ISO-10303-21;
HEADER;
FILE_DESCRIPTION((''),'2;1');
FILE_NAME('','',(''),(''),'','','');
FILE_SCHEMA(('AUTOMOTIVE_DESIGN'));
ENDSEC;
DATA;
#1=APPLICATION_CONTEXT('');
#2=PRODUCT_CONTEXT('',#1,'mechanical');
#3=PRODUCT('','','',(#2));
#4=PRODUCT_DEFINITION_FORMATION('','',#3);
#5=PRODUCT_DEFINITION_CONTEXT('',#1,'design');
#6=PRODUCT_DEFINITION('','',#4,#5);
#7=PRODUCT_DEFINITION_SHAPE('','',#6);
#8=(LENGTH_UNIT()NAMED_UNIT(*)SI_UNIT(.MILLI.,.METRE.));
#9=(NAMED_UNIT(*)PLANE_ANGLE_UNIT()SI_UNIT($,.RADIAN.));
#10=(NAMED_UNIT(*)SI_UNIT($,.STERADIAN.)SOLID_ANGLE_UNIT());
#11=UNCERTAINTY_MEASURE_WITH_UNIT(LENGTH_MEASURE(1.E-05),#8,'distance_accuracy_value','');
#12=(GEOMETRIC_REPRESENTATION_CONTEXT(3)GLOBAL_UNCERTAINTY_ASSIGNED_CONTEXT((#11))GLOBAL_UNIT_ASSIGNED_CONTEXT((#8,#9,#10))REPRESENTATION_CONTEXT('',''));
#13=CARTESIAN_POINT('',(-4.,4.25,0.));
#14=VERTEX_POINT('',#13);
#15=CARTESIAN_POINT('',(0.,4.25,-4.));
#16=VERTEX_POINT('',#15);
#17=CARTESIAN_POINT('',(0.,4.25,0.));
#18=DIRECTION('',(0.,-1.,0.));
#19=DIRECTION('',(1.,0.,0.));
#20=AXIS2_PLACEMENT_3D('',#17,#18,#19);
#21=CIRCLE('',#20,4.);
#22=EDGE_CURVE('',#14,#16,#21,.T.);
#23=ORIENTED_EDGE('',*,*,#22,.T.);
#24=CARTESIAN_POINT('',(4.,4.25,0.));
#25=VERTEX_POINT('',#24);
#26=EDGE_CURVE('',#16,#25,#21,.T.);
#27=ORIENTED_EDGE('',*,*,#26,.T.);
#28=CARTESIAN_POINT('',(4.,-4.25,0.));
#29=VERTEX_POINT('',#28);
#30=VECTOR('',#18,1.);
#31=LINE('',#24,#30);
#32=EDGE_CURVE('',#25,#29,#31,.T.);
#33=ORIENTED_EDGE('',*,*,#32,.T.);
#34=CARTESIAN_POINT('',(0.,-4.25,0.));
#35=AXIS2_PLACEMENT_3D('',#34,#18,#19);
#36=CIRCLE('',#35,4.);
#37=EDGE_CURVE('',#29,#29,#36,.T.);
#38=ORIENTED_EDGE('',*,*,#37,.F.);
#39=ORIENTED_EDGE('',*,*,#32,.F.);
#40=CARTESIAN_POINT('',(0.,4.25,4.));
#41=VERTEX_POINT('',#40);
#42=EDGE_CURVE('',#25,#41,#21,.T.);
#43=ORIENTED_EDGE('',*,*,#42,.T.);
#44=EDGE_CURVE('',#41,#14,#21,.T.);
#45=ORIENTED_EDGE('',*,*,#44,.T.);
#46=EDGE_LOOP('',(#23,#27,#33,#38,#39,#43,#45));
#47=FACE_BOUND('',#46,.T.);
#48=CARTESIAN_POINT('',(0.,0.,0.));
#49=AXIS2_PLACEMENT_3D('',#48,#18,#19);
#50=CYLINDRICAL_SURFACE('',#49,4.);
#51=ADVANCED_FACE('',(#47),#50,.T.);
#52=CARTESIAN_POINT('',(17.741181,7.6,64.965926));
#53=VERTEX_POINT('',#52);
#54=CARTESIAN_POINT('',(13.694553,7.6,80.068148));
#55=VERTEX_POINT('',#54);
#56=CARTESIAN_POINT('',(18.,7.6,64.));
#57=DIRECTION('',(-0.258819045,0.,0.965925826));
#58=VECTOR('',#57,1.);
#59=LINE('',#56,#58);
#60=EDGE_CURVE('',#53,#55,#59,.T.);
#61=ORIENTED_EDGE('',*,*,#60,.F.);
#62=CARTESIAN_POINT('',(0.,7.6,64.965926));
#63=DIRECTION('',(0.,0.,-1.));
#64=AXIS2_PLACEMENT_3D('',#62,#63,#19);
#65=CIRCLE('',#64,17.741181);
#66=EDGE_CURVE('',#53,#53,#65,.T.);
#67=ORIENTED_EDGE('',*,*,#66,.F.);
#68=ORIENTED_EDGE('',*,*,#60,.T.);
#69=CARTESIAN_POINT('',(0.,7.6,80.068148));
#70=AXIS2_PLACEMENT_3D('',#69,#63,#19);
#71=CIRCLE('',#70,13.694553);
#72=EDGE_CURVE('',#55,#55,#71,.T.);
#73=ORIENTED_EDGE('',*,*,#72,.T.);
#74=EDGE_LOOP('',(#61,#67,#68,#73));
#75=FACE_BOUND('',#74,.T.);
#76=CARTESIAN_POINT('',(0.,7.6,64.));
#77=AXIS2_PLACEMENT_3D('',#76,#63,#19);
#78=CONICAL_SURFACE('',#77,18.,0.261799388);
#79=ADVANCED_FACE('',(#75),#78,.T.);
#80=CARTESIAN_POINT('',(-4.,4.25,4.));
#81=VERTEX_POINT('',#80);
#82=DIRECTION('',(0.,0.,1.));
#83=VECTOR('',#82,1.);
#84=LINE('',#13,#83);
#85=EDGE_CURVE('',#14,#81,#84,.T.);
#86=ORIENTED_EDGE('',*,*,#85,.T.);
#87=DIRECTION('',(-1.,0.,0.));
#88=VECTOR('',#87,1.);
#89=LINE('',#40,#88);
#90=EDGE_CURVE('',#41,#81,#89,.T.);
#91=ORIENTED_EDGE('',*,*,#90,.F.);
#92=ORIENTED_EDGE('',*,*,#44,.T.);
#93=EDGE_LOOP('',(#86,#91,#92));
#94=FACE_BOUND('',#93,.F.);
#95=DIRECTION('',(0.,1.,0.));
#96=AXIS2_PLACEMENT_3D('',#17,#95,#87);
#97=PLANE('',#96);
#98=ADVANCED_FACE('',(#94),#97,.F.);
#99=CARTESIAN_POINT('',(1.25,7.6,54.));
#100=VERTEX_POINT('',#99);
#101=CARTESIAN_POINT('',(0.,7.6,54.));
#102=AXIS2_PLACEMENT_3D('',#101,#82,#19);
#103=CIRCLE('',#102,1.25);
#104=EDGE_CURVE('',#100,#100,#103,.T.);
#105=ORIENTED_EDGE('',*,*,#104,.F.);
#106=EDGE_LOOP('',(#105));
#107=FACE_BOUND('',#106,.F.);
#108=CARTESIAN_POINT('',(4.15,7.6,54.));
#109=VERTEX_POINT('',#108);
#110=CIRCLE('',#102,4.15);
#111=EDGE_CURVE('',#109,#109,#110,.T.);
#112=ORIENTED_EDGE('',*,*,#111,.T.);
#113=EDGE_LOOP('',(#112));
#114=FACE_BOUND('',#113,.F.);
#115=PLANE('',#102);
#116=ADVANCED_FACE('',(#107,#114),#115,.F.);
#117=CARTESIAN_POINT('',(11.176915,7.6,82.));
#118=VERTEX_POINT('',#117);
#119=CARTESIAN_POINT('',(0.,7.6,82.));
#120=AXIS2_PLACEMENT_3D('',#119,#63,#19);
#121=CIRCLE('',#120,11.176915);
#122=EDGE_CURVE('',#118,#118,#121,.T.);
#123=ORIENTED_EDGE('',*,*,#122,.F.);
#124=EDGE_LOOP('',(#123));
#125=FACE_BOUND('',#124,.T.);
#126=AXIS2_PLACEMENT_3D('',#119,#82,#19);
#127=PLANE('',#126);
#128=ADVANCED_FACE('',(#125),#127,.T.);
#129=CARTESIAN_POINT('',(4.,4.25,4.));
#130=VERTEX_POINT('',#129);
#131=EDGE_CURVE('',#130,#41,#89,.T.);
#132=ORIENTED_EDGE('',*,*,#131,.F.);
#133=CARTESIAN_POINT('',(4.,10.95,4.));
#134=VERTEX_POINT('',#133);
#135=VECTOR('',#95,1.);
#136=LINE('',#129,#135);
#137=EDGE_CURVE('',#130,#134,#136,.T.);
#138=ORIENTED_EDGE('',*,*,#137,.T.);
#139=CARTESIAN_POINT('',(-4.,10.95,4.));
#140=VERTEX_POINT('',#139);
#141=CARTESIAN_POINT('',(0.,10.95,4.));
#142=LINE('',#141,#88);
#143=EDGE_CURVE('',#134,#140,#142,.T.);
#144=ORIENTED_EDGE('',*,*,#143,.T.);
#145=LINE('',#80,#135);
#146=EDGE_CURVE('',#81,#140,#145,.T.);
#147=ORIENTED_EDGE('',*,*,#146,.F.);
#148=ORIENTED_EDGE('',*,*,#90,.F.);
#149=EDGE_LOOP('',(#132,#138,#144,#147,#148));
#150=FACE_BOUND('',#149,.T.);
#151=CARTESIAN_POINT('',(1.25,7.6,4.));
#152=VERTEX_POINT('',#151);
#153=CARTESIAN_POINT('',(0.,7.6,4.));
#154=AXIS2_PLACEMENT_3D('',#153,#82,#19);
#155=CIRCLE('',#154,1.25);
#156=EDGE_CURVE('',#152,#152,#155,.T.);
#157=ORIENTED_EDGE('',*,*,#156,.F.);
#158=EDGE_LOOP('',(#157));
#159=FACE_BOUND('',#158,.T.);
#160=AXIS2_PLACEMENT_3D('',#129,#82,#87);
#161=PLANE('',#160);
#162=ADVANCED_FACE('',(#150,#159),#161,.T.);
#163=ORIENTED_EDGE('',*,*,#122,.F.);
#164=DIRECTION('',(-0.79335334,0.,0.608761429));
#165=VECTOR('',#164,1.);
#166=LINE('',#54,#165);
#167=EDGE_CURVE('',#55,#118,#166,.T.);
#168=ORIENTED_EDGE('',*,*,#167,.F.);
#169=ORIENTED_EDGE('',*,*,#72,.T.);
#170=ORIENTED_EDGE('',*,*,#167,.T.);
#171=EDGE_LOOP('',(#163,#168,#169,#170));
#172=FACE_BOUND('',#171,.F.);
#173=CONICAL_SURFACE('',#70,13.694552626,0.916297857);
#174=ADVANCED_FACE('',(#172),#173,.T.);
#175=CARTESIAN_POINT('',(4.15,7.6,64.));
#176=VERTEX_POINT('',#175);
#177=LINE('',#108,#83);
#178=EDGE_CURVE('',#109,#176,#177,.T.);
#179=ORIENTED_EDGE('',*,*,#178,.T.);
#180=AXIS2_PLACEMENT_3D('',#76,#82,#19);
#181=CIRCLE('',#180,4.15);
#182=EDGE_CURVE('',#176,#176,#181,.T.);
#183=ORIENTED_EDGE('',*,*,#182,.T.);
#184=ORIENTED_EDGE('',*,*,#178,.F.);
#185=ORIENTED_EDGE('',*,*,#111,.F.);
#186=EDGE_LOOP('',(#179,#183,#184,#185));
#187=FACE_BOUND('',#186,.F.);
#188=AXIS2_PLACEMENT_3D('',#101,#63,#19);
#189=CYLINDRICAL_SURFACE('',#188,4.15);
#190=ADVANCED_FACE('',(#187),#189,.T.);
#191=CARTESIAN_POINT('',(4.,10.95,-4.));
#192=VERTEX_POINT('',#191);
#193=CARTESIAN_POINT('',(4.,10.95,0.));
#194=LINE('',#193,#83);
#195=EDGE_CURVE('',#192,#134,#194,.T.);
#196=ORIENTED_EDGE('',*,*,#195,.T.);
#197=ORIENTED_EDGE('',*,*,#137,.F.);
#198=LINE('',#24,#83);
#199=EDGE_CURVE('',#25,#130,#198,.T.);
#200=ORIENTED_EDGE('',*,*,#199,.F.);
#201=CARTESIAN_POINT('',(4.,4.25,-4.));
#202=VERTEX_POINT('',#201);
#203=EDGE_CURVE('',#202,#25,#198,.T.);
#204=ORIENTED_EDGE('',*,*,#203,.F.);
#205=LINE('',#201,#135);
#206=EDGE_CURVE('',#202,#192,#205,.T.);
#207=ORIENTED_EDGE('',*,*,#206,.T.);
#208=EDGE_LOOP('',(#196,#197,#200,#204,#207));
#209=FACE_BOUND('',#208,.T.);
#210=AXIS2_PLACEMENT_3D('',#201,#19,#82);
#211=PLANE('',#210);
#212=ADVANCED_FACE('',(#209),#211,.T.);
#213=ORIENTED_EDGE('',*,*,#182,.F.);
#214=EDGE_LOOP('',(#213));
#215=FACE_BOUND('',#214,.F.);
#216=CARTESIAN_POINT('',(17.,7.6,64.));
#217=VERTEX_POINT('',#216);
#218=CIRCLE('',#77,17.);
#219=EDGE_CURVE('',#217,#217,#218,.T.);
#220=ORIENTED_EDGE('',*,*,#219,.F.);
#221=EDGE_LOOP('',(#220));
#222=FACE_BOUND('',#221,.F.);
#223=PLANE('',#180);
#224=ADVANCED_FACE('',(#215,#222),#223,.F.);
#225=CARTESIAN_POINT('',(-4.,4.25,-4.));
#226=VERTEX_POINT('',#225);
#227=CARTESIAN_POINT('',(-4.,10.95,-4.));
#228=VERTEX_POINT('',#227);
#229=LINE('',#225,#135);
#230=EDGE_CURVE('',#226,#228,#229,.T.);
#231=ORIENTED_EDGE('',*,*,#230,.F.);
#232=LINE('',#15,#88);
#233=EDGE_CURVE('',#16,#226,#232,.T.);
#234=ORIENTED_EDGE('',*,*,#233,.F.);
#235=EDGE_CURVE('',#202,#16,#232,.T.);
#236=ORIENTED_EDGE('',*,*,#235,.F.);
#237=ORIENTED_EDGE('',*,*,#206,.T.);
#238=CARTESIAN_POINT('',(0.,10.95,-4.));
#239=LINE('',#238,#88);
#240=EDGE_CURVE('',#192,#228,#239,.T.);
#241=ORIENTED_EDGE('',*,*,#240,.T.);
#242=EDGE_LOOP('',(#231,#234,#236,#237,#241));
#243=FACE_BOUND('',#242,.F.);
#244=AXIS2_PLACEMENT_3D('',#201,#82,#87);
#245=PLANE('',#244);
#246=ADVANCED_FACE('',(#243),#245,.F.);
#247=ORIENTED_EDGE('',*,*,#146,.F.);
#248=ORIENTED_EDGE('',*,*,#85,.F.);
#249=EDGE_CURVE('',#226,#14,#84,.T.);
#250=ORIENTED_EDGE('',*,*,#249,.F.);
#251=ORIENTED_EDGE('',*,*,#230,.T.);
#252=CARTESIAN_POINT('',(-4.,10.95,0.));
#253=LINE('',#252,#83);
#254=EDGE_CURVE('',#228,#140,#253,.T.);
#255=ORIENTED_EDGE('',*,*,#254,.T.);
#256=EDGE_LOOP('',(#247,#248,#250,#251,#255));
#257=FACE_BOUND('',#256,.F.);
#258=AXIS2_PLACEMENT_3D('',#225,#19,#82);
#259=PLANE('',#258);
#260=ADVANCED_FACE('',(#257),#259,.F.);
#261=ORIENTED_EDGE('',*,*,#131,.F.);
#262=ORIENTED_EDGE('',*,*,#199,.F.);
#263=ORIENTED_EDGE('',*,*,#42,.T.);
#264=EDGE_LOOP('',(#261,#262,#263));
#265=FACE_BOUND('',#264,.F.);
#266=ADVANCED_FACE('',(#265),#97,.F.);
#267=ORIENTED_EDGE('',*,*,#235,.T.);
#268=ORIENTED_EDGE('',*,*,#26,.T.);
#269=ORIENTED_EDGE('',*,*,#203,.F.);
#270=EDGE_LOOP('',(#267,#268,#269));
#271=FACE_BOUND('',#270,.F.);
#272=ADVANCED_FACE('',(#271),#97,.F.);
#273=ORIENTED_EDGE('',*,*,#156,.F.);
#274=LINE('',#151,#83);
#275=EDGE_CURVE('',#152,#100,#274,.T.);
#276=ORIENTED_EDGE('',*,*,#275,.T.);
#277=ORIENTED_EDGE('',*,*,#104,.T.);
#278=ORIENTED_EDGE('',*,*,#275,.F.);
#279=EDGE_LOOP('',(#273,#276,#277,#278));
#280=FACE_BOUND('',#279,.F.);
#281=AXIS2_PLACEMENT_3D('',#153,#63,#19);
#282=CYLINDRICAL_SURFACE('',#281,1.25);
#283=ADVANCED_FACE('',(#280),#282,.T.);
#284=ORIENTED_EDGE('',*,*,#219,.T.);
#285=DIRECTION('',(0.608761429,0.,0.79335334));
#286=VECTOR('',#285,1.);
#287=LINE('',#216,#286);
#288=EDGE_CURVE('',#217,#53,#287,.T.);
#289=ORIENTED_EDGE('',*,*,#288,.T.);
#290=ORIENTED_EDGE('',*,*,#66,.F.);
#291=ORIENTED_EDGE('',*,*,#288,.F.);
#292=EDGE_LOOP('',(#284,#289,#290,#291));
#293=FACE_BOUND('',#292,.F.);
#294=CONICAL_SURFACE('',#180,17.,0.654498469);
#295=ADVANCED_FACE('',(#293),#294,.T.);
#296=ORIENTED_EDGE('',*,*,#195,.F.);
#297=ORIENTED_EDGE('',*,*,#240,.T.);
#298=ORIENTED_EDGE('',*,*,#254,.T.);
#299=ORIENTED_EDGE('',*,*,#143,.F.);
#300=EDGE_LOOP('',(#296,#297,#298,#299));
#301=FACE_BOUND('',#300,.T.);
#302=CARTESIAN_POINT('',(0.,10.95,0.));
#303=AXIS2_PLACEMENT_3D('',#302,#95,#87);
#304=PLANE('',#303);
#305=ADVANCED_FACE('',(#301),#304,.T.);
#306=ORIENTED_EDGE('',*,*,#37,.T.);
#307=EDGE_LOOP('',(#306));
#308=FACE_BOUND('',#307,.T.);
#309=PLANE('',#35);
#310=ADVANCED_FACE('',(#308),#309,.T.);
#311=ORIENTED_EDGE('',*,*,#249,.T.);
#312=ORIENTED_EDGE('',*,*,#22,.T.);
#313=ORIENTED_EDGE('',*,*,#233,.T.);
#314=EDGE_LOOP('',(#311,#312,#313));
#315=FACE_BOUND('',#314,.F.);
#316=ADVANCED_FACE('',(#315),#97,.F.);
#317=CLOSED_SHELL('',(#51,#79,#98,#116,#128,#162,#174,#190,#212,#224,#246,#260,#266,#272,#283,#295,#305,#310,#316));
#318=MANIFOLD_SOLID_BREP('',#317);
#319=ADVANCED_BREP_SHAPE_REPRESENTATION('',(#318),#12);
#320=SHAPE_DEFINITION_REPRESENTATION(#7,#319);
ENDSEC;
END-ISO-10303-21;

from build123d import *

# Parameters (mm, degrees)
F0_R     = 4
F1_DEPTH = 4.25
F2_W     = 8
F2_H     = 8
F3_DEPTH = 6.7
F4_R     = 1.25
F5_DEPTH = 50
F6_R     = 4.15
F7_DEPTH = 10
F8_R     = 18
F8_R_2   = 4.15
F9_DEPTH = 18
F9_TAPER = 15


# Not quite as in the source:
# - a fillet or chamfer that OpenCascade refuses, or shapes differently, is made with other operations: its cross-section is extruded or revolved along the edge and cut away or added


with BuildPart() as f1:
    # F0 (on Front) → F1 (new body, symmetric)
    with BuildSketch(Plane.XZ):
        Circle(F0_R)
    extrude(amount=F1_DEPTH, both=True)

    # F2 (on face) → F3 (join)
    with BuildSketch(Plane(origin=(0, 4.25, 0), x_dir=(-1, 0, 0), z_dir=(0, 1, 0))):
        Rectangle(F2_W, F2_H)
    extrude(amount=F3_DEPTH)

    # F4 (on face) → F5 (join)
    with BuildSketch(Plane.XY.offset(4)):
        with Locations((0, 7.6)):
            Circle(F4_R)
    extrude(amount=F5_DEPTH)

    # F6 (on face) → F7 (join)
    with BuildSketch(Plane.XY.offset(54)):
        with Locations((0, 7.6)):
            Circle(F6_R)
    extrude(amount=F7_DEPTH)

    # F8 (on face) → F9 (join)
    with BuildSketch(Plane.XY.offset(64)):
        with Locations((0, 7.6)):
            Circle(F8_R)
        with Locations((0, 7.6)):
            Circle(F8_R_2, mode=Mode.SUBTRACT)
        with Locations((0, 7.6)):
            Circle(F8_R_2)
    extrude(amount=F9_DEPTH, taper=F9_TAPER)

    # F10: chamfer of 1 on 1 edges, made by hand

    # F10_s1 → F10_t2 (revolve, cut)
    with BuildSketch(Plane.XZ.offset(-7.6)):
        Polygon((17, 64), (17.7411809549, 64.9659258263), (18, 64), align=None)
    revolve(axis=Axis((0, 7.6, 64), (0, 0, -1)), mode=Mode.SUBTRACT)

    # F11: chamfer of 2 on 1 edges, made by hand

    # F11_s1 → F11_t2 (revolve, cut)
    with BuildSketch(Plane.XZ.offset(-7.6)):
        Polygon((13.6945526264, 80.0681483474), (11.1769145362, 82), (13.1769145362, 82), align=None)
    revolve(axis=Axis((0, 7.6, 82), (0, 0, -1)), mode=Mode.SUBTRACT)


solid = f1.part
